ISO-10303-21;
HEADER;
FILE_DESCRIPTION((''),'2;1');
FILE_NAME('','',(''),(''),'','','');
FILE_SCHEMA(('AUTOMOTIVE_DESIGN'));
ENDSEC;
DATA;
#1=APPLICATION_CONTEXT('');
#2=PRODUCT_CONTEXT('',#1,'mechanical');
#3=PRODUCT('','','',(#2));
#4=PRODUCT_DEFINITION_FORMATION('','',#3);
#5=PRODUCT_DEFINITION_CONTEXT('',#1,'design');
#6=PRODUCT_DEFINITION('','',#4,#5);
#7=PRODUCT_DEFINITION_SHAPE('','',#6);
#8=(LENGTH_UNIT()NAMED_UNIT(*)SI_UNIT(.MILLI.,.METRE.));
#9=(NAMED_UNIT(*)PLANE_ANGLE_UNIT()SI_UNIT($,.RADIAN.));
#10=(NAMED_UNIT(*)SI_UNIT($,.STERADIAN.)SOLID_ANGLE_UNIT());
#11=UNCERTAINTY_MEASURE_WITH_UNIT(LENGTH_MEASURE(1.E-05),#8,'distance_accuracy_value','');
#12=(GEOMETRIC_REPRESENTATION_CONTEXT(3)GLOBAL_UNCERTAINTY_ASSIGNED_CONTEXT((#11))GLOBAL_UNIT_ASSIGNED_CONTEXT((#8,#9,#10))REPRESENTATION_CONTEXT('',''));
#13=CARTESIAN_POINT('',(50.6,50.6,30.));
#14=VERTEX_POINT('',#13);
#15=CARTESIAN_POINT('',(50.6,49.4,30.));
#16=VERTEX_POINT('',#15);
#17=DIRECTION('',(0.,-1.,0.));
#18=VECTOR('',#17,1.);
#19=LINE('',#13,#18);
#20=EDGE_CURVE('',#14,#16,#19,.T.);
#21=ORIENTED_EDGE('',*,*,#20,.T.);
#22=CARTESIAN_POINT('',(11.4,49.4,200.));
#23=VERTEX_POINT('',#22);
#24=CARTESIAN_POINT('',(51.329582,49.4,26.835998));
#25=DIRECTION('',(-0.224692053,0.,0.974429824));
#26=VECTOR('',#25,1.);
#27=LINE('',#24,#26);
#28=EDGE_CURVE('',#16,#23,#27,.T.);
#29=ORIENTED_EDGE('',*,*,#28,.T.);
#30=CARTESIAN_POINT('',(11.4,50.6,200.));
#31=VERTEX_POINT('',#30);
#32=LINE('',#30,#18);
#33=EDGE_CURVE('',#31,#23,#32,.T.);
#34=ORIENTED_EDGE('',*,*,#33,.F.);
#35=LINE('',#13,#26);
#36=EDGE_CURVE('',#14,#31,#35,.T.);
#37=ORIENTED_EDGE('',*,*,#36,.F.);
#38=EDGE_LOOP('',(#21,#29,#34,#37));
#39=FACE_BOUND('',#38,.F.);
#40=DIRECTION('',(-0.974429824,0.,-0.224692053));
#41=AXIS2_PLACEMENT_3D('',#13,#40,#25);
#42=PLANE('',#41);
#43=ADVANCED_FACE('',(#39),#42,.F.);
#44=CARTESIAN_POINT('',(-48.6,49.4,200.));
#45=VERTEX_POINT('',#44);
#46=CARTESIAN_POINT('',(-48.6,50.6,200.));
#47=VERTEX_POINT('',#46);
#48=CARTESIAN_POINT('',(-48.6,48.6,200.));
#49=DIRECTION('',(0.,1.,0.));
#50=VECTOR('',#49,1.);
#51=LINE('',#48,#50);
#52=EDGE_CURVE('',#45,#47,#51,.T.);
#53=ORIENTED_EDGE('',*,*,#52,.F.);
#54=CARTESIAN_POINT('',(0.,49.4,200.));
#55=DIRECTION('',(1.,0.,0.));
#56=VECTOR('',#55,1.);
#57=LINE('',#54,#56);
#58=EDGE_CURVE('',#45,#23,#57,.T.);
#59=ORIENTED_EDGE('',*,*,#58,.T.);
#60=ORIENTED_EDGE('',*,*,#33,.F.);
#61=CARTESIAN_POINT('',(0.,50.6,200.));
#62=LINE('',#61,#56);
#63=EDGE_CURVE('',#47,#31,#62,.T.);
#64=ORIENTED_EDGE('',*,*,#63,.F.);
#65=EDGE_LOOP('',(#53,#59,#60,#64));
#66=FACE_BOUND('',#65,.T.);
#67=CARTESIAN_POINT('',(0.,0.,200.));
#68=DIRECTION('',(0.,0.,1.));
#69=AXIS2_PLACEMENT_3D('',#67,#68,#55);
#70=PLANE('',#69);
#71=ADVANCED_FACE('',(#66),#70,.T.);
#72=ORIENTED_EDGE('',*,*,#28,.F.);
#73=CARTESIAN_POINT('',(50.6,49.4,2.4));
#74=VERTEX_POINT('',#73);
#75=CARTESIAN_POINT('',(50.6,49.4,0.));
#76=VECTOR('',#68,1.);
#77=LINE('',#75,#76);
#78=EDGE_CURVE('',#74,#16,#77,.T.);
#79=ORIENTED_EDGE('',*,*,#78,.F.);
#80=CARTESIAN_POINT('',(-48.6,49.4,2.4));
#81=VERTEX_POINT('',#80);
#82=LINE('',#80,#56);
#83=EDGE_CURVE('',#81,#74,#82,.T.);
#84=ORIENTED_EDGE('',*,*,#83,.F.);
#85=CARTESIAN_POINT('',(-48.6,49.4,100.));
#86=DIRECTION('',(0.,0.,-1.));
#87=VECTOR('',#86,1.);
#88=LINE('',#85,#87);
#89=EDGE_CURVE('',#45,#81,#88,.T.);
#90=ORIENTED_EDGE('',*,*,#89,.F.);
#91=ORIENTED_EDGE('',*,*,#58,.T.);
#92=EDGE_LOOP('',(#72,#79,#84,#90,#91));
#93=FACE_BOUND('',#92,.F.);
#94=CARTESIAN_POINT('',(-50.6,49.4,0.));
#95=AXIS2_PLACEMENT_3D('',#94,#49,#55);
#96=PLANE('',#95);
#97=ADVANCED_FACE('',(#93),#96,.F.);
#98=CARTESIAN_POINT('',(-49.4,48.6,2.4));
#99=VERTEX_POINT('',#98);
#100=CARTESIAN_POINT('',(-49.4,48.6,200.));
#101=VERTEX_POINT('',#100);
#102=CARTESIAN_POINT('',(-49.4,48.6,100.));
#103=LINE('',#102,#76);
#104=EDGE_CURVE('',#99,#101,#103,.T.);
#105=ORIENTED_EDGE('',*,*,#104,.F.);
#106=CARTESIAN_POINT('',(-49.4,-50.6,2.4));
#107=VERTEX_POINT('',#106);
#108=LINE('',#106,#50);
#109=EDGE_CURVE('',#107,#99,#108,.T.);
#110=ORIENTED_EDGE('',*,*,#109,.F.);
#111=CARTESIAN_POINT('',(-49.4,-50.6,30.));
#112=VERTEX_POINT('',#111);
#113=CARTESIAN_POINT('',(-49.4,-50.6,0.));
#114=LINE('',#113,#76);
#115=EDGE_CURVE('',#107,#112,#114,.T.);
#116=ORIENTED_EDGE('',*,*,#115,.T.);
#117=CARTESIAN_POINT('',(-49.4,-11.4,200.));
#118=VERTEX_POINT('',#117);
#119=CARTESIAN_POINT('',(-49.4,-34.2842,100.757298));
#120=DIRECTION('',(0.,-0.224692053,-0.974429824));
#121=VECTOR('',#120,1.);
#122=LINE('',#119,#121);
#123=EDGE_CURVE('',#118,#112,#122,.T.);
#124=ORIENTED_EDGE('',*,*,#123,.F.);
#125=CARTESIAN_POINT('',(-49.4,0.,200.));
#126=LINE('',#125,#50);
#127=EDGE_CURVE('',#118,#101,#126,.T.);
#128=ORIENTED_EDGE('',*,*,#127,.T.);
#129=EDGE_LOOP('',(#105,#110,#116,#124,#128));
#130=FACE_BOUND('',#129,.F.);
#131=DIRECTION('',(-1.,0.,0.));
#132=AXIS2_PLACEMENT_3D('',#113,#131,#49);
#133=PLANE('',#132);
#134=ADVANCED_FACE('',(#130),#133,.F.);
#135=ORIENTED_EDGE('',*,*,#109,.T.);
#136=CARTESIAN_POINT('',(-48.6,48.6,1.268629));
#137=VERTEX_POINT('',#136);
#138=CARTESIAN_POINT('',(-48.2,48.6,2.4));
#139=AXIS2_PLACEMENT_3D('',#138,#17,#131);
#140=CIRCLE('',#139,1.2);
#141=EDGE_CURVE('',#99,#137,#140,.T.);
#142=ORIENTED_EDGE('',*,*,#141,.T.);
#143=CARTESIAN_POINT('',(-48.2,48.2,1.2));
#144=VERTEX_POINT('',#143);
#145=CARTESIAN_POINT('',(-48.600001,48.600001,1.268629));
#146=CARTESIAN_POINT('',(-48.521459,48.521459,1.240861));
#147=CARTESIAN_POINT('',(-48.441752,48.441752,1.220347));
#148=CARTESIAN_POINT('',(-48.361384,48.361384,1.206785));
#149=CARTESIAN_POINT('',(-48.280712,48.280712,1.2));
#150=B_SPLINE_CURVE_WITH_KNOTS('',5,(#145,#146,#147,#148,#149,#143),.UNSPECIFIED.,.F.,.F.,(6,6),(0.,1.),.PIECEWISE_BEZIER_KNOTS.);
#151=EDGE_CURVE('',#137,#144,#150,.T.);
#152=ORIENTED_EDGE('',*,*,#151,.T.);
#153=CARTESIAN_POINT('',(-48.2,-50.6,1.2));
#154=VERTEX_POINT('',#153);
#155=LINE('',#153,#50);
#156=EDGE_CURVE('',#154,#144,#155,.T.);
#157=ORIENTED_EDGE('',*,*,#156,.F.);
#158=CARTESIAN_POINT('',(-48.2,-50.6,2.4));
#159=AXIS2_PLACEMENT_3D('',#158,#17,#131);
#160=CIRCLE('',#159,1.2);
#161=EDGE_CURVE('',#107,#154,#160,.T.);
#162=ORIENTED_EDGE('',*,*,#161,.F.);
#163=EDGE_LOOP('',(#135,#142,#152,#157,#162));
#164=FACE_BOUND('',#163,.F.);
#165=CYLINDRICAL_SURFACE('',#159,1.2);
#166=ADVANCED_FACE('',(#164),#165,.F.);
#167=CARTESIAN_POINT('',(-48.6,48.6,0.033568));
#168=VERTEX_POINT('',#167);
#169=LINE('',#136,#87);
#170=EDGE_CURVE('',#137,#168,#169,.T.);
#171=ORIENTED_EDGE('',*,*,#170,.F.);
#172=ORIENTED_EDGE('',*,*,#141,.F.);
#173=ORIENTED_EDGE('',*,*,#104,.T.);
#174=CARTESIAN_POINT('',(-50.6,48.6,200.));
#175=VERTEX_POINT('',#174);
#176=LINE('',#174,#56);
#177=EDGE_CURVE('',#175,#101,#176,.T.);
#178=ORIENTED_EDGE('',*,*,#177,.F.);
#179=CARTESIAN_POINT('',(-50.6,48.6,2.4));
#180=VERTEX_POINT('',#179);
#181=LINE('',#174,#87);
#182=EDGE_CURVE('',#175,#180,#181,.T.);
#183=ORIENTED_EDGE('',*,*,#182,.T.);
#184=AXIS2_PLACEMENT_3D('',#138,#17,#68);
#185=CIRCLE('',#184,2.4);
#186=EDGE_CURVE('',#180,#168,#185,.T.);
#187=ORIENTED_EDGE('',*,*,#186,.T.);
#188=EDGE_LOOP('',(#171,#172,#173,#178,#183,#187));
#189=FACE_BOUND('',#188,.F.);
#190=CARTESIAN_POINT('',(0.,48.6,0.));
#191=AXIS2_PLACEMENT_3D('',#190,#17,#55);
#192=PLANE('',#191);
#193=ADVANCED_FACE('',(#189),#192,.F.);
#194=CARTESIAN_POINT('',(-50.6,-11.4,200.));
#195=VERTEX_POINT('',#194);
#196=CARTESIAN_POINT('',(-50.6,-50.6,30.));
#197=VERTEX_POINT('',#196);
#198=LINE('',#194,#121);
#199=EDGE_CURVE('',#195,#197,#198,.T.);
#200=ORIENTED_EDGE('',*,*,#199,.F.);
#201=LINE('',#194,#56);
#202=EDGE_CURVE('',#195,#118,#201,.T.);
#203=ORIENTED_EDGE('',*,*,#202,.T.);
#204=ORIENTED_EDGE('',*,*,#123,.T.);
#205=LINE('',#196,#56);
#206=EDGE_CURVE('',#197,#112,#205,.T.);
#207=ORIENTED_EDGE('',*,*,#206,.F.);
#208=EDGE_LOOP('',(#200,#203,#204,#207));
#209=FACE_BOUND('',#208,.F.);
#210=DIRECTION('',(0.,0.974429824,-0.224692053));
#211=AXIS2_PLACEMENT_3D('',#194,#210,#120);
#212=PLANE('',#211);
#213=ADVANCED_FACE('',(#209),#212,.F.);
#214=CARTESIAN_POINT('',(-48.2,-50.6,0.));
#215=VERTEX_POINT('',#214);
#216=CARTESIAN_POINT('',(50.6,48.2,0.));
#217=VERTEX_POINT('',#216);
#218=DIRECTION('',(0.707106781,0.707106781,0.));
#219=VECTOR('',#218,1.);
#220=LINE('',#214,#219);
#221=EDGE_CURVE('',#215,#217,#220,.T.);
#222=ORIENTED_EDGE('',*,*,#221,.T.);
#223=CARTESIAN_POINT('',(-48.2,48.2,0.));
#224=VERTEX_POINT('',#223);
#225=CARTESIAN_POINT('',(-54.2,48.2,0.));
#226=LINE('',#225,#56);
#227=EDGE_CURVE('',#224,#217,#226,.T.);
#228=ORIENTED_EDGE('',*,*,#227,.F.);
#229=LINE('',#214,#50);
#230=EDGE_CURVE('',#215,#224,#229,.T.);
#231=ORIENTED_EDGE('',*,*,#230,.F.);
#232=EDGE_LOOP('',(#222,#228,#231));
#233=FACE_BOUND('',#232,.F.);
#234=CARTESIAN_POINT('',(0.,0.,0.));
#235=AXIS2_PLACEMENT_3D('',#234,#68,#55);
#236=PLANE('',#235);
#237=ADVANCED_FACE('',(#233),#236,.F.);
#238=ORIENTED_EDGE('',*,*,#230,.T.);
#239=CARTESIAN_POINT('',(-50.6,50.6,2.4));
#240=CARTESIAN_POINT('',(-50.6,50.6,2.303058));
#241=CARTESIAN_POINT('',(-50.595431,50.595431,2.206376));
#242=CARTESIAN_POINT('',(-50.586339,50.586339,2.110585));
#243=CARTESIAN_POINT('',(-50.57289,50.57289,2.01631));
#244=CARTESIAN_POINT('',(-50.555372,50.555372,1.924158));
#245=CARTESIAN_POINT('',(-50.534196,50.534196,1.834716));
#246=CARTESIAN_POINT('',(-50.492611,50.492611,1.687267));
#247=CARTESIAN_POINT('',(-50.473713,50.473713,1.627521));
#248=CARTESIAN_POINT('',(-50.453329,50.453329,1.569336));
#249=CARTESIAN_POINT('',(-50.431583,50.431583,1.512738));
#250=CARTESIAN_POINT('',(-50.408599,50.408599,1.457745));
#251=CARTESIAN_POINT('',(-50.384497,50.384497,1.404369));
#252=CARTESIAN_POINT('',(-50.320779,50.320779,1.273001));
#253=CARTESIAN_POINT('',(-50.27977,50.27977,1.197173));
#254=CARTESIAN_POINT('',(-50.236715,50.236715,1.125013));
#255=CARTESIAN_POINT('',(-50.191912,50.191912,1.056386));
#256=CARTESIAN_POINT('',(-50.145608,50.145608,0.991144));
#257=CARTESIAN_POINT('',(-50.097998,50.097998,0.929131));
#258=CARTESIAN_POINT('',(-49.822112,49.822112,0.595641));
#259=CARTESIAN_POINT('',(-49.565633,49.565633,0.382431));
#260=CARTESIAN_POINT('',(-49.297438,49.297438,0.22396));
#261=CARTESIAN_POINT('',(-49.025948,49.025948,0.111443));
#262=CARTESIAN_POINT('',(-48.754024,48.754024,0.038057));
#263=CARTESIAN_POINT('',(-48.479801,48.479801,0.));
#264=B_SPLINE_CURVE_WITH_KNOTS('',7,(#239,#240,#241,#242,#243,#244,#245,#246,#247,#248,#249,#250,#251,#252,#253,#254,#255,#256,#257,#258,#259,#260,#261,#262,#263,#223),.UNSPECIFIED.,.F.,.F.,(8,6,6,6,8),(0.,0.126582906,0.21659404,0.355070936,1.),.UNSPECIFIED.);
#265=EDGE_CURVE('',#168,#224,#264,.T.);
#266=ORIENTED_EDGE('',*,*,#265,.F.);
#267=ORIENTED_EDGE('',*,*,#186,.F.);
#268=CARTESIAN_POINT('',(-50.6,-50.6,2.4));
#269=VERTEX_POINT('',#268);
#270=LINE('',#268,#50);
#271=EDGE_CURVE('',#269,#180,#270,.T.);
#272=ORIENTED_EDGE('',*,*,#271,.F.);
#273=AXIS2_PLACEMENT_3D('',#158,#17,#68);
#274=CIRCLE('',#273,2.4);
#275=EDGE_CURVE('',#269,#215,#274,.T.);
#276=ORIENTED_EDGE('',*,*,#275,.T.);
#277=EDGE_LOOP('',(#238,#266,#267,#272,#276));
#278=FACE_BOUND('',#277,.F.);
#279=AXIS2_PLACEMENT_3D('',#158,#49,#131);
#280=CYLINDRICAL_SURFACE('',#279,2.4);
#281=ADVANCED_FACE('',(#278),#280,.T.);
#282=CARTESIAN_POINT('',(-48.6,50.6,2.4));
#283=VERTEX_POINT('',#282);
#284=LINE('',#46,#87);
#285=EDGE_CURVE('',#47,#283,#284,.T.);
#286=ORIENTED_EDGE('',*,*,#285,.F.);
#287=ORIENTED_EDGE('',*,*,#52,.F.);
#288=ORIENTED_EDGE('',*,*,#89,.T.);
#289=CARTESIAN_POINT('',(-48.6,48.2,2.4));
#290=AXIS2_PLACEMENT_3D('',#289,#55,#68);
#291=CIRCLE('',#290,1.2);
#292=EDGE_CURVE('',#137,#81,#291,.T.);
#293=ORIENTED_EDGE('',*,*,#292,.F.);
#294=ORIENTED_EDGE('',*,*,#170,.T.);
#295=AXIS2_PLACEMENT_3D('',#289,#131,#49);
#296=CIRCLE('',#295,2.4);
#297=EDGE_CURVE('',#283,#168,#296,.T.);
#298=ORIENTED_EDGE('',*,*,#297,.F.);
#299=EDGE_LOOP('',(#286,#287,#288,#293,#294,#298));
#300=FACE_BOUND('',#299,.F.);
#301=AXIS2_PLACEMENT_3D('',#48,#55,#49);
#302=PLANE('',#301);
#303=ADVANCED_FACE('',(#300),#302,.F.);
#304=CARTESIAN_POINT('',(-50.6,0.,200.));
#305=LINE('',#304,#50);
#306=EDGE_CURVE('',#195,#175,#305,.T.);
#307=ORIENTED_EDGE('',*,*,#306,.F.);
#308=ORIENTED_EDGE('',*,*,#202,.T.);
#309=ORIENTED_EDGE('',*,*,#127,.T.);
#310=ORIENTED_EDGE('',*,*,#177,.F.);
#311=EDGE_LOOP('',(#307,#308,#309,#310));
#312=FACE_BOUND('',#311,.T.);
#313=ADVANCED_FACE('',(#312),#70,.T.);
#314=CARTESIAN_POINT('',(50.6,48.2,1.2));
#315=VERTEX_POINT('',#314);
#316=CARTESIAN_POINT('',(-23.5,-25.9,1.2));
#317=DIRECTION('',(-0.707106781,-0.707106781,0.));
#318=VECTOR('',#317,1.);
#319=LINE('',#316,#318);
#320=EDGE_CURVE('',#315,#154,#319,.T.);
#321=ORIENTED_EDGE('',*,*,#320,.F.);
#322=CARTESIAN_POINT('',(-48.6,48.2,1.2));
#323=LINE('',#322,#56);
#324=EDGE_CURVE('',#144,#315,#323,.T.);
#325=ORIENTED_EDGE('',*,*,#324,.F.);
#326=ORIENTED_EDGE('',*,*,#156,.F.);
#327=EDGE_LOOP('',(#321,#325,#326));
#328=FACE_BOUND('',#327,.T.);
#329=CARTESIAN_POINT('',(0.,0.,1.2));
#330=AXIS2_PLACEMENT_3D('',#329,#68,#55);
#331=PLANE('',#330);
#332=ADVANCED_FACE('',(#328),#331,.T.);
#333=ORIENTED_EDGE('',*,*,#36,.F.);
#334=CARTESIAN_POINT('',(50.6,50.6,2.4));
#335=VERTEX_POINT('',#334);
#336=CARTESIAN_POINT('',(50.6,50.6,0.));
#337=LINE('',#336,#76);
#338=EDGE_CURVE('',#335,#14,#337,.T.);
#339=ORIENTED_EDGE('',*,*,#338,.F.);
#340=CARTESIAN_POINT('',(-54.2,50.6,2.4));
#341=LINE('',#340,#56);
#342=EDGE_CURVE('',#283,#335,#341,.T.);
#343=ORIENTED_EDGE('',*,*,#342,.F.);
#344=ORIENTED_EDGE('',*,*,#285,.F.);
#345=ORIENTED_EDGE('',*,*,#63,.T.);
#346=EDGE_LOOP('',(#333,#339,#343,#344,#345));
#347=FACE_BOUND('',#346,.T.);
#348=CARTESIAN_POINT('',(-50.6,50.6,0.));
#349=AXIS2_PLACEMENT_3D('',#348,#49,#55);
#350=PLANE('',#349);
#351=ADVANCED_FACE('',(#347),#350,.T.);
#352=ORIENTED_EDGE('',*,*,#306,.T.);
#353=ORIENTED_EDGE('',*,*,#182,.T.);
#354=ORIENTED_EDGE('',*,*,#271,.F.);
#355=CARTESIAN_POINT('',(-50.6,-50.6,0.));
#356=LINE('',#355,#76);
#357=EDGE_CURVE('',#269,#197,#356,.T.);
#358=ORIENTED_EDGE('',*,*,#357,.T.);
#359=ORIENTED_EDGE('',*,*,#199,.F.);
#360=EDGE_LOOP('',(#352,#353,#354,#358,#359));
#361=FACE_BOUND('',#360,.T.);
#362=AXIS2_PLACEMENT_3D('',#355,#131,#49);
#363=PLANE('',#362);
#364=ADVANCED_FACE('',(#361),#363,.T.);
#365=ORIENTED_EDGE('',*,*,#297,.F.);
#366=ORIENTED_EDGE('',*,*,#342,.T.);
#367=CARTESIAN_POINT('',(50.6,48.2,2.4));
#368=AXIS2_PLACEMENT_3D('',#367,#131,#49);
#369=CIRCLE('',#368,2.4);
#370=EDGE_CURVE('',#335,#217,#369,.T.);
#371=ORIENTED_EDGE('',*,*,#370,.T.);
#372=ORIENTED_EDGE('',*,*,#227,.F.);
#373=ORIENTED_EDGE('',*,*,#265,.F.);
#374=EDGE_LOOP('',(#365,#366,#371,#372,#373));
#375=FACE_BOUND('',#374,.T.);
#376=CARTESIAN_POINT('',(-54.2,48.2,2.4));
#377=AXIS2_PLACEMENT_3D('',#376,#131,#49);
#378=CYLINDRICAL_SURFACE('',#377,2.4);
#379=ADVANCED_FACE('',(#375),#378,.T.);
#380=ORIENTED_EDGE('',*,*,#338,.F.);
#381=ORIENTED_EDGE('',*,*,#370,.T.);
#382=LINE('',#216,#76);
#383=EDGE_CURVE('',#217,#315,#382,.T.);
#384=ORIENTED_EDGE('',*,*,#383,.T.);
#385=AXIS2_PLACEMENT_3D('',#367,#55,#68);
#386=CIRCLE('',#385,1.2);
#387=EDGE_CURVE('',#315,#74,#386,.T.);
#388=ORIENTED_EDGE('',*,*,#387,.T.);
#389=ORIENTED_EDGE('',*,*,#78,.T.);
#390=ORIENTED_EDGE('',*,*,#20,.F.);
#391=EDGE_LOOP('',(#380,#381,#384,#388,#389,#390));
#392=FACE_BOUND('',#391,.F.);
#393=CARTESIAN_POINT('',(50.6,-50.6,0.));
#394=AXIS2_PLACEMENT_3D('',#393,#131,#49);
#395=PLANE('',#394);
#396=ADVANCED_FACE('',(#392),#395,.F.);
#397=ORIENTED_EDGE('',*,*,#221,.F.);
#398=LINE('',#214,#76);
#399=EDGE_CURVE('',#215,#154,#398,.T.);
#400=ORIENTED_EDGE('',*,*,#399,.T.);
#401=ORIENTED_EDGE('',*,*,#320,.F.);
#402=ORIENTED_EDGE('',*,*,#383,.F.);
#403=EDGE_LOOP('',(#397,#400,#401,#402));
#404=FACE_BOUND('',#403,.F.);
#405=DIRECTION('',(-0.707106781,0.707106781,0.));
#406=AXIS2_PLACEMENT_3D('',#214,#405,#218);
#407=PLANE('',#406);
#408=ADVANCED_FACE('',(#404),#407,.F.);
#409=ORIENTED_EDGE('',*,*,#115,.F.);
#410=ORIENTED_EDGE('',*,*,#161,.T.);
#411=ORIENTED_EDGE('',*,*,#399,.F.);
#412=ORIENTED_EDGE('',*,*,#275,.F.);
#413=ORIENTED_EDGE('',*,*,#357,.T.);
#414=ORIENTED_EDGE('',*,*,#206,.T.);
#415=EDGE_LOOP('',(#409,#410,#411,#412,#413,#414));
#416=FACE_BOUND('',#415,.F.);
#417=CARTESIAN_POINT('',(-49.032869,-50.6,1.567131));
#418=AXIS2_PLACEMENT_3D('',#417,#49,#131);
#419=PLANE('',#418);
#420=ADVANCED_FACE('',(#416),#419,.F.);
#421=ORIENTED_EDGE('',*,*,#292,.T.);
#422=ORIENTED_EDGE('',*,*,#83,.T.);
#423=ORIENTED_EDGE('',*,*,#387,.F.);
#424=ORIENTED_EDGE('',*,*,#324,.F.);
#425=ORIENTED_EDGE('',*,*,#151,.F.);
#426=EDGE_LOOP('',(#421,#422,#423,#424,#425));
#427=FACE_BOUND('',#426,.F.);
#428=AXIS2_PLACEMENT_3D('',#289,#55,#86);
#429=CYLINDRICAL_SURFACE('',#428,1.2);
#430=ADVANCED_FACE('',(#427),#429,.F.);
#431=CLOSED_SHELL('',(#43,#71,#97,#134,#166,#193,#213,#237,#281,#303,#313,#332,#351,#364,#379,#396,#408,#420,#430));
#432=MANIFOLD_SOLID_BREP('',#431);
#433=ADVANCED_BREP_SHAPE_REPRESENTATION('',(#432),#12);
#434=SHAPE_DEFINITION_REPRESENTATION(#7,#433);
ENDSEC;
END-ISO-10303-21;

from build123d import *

# Parameters (mm, degrees)
F0_W        = 101.2
F0_H        = 101.2
F1_DEPTH    = 200
F2_T        = -1.2
F4_W        = 0.8
F4_H        = 0.8
F5_DEPTH    = 200.001
F6_R        = 1.2
F7_T4_DEPTH = 101.8
F8_R        = 2.4
F9_T1_DEPTH = 110.8
F12_DEPTH   = 25
F13_DEPTH   = 25
F15_DEPTH   = 25


# Not quite as in the source:
# - a fillet or chamfer that OpenCascade refuses, or shapes differently, is made with other operations: its cross-section is extruded or revolved along the edge and cut away or added


with BuildPart() as f1:
    # F0 (on Top) → F1 (new body)
    with BuildSketch(Plane.XY):
        Rectangle(F0_W, F0_H)
    extrude(amount=F1_DEPTH)

    # F2
    f2_openings = [f1.faces().sort_by_distance(p)[0] for p in [
        (0, 0, 200),
        (0, -50.6, 100),
        (50.6, 0, 100),
    ]]
    offset(amount=F2_T, openings=f2_openings)

    # F4 (on face) → F5 (cut, through all)
    with BuildSketch(Plane.XY.offset(200)):
        with Locations((-49, 49)):
            Rectangle(F4_W, F4_H)
        Polygon((-50.6, 50.6), (-50.6, 48.6), (-49.4, 48.6), (-49.4, 49.4), (-48.6, 49.4), (-48.6, 50.6), align=None)
    extrude(amount=-F5_DEPTH, mode=Mode.SUBTRACT)

    # F6
    f6_edges = [f1.edges().sort_by_distance(p)[0] for p in [
        (1, 49.4, 1.2),
    ]]
    fillet(f6_edges, radius=F6_R)

    # F7: fillet of radius 1.2 on 1 edges, made by hand


with BuildPart() as f7_tool2:
    # F7_s3 → F7_t4 (new body)
    with BuildSketch(Plane.XZ.offset(50.6)):
        with BuildLine():
            ThreePointArc((-49.4, 2.4), (-49.0485281374, 1.5514718626), (-48.2, 1.2))
            Line((-48.2, 1.2), (-49.4, 1.2))
            Line((-49.4, 1.2), (-49.4, 2.4))
        make_face()
    extrude(amount=-F7_T4_DEPTH)

    split(bisect_by=Plane.XZ.offset(-48.6), keep=Keep.TOP)


with BuildPart() as f1_1:
    add(f1.part)

    # F7_t1: union F7_tool2
    add(f7_tool2.part)

    # F8
    f8_edges = [f1_1.edges().sort_by_distance(p)[0] for p in [
        (-50.6, -1, 0),
    ]]
    fillet(f8_edges, radius=F8_R)

    # F9: fillet of radius 2.4 on 1 edges, made by hand

    # F9_s2 → F9_t1 (cut)
    with BuildSketch(Plane.YZ.offset(-54.2)):
        with BuildLine():
            ThreePointArc((50.6, 2.4), (49.8970562748, 0.7029437252), (48.2, 0))
            Line((48.2, 0), (50.6, 0))
            Line((50.6, 0), (50.6, 2.4))
        make_face()
    extrude(amount=F9_T1_DEPTH, mode=Mode.SUBTRACT)

    # F11 (on face) → F12 (cut)
    with BuildSketch(Plane(origin=(0, 50.6, 0), x_dir=(-1, 0, 0), z_dir=(0, 1, 0))):
        Polygon((-11.4, 200), (-50.6, 200), (-50.6, 30), align=None)
    extrude(amount=-F12_DEPTH, mode=Mode.SUBTRACT)

    # F10 (on face) → F13 (cut)
    with BuildSketch(Plane(origin=(-50.6, 0, 0), x_dir=(0, -1, 0), z_dir=(-1, 0, 0))):
        Polygon((50.6, 30), (50.6, 200), (11.4, 200), align=None)
    extrude(amount=-F13_DEPTH, mode=Mode.SUBTRACT)

    # F14 (on face) → F15 (cut)
    with BuildSketch(Plane(origin=(0, 0, 0), x_dir=(1, 0, 0), z_dir=(0, 0, -1))):
        Polygon((50.6, -48.2), (50.6, 50.6), (-48.2, 50.6), align=None)
    extrude(amount=-F15_DEPTH, mode=Mode.SUBTRACT)


solid = f1_1.part
